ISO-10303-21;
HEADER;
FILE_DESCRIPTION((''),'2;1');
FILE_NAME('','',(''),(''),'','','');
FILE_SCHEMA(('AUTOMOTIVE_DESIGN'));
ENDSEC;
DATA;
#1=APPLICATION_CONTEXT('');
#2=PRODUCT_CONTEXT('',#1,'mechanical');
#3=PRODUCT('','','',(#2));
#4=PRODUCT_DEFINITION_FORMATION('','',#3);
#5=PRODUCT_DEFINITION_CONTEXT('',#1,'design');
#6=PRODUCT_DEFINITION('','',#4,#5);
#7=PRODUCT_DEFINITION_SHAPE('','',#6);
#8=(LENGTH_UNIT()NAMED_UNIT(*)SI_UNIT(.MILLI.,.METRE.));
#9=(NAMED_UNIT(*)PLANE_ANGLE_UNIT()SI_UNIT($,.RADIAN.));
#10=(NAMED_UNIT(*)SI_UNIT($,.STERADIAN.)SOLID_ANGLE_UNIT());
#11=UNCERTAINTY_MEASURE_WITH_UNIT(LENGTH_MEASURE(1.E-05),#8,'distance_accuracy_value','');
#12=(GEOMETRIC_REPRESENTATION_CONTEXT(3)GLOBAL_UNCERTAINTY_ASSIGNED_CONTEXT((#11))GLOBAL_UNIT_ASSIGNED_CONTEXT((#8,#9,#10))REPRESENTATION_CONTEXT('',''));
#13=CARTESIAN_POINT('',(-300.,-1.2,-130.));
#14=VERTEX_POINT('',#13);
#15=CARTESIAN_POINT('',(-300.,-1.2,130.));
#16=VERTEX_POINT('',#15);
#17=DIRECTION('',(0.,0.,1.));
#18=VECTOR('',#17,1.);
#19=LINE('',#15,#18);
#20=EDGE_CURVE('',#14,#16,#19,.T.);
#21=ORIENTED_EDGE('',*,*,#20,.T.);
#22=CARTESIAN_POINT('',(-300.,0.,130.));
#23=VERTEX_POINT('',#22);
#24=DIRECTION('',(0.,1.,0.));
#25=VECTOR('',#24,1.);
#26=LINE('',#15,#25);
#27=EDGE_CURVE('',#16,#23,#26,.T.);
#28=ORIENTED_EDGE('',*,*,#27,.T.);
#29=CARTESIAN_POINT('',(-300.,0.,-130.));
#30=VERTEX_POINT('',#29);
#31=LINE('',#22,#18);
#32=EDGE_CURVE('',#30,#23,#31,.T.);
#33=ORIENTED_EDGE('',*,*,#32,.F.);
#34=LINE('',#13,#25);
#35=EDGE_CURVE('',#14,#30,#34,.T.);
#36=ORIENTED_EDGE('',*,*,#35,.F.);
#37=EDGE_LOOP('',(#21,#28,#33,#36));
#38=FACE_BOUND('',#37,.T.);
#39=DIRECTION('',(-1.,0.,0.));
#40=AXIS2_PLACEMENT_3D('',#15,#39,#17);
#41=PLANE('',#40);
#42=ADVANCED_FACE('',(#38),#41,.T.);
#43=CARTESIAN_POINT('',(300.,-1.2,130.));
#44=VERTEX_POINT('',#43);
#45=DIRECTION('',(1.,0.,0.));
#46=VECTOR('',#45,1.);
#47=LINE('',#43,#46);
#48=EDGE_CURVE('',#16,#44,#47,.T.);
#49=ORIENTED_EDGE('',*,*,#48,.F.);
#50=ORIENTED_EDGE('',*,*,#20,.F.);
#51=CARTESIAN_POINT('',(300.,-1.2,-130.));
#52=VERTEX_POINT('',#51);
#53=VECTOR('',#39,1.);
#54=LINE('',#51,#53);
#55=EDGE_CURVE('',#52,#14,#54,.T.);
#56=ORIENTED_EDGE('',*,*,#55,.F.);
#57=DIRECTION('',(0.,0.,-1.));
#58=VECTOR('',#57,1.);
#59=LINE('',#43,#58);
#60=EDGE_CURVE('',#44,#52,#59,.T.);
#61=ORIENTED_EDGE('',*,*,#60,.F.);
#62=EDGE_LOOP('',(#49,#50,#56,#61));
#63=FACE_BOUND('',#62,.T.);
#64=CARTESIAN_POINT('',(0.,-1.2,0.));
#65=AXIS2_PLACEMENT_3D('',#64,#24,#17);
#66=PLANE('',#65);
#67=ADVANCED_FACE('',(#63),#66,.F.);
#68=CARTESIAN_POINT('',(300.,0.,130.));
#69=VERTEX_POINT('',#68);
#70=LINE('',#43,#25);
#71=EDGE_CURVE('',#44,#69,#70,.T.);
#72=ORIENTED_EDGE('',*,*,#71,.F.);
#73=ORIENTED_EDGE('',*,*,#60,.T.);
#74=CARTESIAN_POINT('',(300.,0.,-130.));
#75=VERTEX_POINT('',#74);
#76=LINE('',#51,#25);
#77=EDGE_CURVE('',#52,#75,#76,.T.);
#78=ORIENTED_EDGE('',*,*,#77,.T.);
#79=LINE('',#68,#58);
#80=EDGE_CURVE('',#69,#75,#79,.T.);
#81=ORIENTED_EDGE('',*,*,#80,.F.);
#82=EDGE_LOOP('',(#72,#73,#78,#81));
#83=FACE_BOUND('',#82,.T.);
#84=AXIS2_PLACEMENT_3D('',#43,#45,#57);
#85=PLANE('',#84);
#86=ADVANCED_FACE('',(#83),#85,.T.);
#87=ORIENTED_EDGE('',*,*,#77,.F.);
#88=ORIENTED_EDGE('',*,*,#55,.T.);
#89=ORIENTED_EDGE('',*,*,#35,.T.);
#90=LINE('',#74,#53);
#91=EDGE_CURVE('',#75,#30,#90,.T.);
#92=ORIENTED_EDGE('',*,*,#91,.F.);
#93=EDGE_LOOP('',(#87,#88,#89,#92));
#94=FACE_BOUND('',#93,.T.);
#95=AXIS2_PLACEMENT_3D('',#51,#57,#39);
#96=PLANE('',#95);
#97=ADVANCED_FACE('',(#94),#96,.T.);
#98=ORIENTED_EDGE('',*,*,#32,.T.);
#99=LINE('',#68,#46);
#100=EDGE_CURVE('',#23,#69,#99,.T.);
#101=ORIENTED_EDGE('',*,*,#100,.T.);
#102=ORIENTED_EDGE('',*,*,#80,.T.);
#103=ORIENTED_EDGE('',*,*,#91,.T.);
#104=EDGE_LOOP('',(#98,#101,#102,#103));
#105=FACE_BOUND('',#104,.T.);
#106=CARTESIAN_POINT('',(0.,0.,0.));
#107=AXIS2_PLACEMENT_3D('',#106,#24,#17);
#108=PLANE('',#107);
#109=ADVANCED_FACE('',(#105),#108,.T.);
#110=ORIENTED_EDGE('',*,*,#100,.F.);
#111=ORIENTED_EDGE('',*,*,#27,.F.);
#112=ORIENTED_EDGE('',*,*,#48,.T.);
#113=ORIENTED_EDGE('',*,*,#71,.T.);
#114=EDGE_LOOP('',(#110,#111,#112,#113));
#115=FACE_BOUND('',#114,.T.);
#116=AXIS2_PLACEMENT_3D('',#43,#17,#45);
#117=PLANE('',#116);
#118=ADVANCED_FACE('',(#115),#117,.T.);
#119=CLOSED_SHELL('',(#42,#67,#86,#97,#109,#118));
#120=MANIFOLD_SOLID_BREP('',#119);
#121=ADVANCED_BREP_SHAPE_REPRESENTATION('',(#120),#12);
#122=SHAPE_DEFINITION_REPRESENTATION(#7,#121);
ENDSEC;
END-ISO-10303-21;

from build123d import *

# Parameters (mm, degrees)
SKETCH1_W          = 600
SKETCH1_H          = 260
BASE_FLANGE1_DEPTH = 1.2


# Sheet-metal steps are written as plain solids
with BuildPart() as part:
    # Sketch1 → Base-Flange1 (new body)
    with BuildSketch(Plane(origin=(0, 0, 0), x_dir=(1, 0, 0), z_dir=(0, 1, 0))):
        Rectangle(SKETCH1_W, SKETCH1_H)
    extrude(amount=-BASE_FLANGE1_DEPTH)


solid = part.part
